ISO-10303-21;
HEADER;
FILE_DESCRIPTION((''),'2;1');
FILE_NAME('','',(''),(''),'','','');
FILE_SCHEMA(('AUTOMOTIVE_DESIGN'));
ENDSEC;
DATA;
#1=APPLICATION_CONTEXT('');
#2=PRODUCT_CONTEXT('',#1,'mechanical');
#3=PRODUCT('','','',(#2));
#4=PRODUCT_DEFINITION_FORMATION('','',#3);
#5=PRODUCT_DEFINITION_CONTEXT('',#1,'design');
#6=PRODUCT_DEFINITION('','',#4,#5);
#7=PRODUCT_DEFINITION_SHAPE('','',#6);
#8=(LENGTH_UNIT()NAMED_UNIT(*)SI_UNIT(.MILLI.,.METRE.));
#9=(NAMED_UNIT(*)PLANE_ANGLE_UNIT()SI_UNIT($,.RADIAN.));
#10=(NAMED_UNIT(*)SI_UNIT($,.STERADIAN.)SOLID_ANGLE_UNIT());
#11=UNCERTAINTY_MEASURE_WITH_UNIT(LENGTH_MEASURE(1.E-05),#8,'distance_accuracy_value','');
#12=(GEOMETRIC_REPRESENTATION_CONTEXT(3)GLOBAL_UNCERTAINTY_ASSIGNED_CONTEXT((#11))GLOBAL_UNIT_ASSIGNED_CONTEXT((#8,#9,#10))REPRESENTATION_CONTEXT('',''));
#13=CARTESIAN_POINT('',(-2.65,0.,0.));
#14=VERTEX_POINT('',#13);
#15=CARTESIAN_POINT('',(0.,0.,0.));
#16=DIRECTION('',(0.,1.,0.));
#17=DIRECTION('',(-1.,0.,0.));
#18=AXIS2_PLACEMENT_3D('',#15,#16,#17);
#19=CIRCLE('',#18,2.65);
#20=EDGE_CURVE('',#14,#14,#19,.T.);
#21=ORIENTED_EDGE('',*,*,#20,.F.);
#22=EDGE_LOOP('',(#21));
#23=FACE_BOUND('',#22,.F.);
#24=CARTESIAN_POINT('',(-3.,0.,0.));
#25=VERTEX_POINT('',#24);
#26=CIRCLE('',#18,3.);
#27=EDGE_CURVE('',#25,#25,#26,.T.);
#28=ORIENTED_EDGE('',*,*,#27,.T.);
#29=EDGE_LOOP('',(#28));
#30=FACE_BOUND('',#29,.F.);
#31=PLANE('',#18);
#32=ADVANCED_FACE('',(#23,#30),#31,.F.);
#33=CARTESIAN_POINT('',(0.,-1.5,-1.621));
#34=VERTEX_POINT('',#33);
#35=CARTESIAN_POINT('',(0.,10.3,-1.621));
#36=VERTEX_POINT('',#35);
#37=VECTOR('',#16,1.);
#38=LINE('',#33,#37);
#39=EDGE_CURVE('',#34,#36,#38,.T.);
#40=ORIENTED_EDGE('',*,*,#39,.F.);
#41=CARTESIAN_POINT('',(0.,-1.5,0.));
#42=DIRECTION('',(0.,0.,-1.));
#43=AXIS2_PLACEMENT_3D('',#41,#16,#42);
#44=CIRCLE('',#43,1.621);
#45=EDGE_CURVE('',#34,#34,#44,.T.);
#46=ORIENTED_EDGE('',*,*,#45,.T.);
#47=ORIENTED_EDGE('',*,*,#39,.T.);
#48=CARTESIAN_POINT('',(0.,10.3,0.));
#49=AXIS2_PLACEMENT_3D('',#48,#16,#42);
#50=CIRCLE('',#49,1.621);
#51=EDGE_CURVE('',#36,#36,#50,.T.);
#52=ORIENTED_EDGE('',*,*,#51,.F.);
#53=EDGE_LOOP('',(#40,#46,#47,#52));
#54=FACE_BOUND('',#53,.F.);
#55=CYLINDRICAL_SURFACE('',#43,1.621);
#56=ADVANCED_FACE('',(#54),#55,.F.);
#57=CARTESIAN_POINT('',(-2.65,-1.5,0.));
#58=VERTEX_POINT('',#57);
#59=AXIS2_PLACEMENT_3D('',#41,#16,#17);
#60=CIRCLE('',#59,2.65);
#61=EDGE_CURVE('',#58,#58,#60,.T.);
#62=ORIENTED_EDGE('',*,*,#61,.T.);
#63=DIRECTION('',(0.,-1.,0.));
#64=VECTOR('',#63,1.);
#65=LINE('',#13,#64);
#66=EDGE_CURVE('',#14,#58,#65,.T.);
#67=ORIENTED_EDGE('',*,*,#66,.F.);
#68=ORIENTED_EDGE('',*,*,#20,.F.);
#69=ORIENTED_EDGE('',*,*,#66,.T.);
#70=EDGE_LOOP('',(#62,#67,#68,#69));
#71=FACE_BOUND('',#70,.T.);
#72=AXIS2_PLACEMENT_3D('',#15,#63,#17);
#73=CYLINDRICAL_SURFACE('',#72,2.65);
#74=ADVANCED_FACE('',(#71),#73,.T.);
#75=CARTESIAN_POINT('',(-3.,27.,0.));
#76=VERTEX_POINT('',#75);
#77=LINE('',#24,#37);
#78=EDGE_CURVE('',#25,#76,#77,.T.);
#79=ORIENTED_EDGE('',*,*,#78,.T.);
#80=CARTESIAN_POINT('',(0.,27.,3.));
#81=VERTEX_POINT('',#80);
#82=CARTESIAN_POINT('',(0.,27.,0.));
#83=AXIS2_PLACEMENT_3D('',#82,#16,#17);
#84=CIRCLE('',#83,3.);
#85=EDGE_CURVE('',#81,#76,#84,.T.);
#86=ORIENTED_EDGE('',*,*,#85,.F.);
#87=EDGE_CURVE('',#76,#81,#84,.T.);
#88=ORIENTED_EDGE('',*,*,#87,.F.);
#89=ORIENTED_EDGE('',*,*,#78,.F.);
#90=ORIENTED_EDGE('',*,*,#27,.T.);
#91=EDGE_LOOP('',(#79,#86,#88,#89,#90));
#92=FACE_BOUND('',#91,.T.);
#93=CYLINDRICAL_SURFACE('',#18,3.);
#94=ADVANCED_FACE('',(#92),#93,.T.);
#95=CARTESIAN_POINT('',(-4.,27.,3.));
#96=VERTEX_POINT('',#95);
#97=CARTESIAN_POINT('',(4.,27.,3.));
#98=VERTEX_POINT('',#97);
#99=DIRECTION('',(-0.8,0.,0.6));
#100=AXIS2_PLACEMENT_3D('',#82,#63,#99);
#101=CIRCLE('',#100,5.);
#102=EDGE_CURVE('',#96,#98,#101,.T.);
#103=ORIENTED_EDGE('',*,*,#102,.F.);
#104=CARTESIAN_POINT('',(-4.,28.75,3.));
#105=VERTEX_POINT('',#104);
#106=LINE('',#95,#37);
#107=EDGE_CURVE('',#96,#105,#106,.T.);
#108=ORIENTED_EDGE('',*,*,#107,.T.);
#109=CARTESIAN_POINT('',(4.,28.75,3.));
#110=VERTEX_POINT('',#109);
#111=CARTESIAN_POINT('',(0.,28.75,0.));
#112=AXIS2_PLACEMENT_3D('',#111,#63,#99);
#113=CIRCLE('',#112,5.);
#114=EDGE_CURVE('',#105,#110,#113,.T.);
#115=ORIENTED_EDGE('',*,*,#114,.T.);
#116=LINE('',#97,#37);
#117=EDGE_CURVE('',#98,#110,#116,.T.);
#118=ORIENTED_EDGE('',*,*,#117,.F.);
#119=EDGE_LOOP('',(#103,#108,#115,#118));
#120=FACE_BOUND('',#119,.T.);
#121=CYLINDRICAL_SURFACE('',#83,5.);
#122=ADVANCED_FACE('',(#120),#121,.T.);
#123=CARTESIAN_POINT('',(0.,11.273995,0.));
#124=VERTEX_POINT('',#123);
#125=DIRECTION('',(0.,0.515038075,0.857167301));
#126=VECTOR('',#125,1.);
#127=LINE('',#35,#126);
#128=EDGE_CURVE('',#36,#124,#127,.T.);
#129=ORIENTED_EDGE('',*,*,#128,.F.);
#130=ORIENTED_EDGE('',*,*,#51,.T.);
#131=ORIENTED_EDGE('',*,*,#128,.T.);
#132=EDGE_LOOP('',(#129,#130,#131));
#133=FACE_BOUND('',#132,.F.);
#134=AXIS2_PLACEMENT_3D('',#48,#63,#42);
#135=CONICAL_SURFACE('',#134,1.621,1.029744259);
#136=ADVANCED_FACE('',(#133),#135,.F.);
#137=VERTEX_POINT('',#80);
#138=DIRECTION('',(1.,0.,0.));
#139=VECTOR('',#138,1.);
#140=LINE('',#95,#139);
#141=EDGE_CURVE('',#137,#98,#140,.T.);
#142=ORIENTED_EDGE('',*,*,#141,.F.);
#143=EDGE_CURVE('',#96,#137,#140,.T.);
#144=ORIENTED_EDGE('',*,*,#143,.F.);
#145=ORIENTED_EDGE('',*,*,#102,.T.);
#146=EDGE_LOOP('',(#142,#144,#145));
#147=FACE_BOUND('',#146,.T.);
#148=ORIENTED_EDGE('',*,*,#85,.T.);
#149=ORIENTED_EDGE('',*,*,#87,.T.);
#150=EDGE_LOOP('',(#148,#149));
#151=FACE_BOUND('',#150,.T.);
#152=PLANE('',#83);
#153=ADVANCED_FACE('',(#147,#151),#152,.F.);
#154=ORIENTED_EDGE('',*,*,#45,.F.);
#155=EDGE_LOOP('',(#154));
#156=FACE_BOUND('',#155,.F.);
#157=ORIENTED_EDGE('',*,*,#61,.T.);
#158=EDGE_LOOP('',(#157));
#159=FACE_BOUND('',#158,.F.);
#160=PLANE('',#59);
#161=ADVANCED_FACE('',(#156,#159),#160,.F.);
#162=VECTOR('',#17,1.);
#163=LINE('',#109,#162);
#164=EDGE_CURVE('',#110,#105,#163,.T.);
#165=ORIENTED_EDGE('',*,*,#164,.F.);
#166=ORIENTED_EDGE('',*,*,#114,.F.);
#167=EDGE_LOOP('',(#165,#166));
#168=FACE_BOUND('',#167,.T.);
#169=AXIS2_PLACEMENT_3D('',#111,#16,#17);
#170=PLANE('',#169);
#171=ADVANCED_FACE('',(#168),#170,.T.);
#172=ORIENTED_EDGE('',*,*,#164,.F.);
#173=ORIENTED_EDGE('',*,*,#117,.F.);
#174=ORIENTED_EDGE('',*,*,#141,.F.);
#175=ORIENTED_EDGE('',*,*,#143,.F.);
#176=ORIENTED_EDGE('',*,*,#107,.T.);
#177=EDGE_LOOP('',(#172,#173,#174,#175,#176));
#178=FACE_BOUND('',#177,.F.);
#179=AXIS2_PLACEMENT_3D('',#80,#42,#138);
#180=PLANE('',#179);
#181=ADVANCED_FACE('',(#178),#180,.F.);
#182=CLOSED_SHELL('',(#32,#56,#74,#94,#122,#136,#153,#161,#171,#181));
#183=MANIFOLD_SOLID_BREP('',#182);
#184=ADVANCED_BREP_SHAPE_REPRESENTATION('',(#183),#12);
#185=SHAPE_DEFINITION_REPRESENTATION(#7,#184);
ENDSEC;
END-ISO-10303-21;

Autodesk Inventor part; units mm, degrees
ref_plane "YZ Plane" through (0, 0, 0) normal (1, 0, 0) x (0, 1, 0)
ref_plane "XZ Plane" through (0, 0, 0) normal (0, 1, 0) x (-1, 0, 0)
ref_plane "XY Plane" through (0, 0, 0) normal (0, 0, 1) x (1, 0, 0)
sketch "Sketch1" plane through (0, 0, 0) normal (0, 0, 1) x (1, 0, 0)
  line L0 (0, 0) -> (0, 39.4806) construction
  line L1 (0, 0) -> (-3, 0) construction
  line L2 (-3, 0) -> (-3, 27)
  line L3 (-3, 27) -> (-5, 27)
  line L4 (-5, 27) -> (-5, 28.75)
  line L5 (0, 0) -> (0, 29)
  line L6 (-3, 0) -> (-2.65, 0)
  line L7 (-2.65, -1.5) -> (0, -1.5)
  line L8 (0, -1.5) -> (0, 0)
  line L9 (-2.65, 0) -> (-2.65, -1.5)
  line L10 (-5, 28.75) -> (0, 28.75)
  dimension "d0" = 3
  dimension "d1" = 5
  dimension "d5" = 27
  dimension "d12" = 2.65
  dimension "d13" = 1.5
  dimension "d24" = 1.75
revolve "Revolution1" add sketch "Sketch1" angle 360 about axis through (0, 0, 0) along (0, 1, 0)
sketch "Sketch3" plane through (0, -1.5, 0) normal (0, -1, 0) x (1, 0, 0)
  point P0 (0, 0)
  point P1 (0, 0)
hole "Hole1" at (0, -1.5, 0) direction (0, 1, 0) diameter 3.242 depth 11.8 tip angle 118 thread size "M4x0.7" class "6H" standard "ANSI Metric M Profile"
sketch "Sketch4" plane through (0, 27, 0) normal (0, -1, 0) x (1, 0, 0)
  arc A0 (4, 3) -> (-4, 3) centre (0, 0) ccw
  line L0 (-4, 3) -> (4, 3)
  circle A1 centre (0, 0) radius 3 projected
  circle A2 centre (0, 0) radius 5 projected
extrude "Extrusion2" cut sketch "Sketch4" against normal through all contours L0 A0
properties part number "shim_peg_V3"
